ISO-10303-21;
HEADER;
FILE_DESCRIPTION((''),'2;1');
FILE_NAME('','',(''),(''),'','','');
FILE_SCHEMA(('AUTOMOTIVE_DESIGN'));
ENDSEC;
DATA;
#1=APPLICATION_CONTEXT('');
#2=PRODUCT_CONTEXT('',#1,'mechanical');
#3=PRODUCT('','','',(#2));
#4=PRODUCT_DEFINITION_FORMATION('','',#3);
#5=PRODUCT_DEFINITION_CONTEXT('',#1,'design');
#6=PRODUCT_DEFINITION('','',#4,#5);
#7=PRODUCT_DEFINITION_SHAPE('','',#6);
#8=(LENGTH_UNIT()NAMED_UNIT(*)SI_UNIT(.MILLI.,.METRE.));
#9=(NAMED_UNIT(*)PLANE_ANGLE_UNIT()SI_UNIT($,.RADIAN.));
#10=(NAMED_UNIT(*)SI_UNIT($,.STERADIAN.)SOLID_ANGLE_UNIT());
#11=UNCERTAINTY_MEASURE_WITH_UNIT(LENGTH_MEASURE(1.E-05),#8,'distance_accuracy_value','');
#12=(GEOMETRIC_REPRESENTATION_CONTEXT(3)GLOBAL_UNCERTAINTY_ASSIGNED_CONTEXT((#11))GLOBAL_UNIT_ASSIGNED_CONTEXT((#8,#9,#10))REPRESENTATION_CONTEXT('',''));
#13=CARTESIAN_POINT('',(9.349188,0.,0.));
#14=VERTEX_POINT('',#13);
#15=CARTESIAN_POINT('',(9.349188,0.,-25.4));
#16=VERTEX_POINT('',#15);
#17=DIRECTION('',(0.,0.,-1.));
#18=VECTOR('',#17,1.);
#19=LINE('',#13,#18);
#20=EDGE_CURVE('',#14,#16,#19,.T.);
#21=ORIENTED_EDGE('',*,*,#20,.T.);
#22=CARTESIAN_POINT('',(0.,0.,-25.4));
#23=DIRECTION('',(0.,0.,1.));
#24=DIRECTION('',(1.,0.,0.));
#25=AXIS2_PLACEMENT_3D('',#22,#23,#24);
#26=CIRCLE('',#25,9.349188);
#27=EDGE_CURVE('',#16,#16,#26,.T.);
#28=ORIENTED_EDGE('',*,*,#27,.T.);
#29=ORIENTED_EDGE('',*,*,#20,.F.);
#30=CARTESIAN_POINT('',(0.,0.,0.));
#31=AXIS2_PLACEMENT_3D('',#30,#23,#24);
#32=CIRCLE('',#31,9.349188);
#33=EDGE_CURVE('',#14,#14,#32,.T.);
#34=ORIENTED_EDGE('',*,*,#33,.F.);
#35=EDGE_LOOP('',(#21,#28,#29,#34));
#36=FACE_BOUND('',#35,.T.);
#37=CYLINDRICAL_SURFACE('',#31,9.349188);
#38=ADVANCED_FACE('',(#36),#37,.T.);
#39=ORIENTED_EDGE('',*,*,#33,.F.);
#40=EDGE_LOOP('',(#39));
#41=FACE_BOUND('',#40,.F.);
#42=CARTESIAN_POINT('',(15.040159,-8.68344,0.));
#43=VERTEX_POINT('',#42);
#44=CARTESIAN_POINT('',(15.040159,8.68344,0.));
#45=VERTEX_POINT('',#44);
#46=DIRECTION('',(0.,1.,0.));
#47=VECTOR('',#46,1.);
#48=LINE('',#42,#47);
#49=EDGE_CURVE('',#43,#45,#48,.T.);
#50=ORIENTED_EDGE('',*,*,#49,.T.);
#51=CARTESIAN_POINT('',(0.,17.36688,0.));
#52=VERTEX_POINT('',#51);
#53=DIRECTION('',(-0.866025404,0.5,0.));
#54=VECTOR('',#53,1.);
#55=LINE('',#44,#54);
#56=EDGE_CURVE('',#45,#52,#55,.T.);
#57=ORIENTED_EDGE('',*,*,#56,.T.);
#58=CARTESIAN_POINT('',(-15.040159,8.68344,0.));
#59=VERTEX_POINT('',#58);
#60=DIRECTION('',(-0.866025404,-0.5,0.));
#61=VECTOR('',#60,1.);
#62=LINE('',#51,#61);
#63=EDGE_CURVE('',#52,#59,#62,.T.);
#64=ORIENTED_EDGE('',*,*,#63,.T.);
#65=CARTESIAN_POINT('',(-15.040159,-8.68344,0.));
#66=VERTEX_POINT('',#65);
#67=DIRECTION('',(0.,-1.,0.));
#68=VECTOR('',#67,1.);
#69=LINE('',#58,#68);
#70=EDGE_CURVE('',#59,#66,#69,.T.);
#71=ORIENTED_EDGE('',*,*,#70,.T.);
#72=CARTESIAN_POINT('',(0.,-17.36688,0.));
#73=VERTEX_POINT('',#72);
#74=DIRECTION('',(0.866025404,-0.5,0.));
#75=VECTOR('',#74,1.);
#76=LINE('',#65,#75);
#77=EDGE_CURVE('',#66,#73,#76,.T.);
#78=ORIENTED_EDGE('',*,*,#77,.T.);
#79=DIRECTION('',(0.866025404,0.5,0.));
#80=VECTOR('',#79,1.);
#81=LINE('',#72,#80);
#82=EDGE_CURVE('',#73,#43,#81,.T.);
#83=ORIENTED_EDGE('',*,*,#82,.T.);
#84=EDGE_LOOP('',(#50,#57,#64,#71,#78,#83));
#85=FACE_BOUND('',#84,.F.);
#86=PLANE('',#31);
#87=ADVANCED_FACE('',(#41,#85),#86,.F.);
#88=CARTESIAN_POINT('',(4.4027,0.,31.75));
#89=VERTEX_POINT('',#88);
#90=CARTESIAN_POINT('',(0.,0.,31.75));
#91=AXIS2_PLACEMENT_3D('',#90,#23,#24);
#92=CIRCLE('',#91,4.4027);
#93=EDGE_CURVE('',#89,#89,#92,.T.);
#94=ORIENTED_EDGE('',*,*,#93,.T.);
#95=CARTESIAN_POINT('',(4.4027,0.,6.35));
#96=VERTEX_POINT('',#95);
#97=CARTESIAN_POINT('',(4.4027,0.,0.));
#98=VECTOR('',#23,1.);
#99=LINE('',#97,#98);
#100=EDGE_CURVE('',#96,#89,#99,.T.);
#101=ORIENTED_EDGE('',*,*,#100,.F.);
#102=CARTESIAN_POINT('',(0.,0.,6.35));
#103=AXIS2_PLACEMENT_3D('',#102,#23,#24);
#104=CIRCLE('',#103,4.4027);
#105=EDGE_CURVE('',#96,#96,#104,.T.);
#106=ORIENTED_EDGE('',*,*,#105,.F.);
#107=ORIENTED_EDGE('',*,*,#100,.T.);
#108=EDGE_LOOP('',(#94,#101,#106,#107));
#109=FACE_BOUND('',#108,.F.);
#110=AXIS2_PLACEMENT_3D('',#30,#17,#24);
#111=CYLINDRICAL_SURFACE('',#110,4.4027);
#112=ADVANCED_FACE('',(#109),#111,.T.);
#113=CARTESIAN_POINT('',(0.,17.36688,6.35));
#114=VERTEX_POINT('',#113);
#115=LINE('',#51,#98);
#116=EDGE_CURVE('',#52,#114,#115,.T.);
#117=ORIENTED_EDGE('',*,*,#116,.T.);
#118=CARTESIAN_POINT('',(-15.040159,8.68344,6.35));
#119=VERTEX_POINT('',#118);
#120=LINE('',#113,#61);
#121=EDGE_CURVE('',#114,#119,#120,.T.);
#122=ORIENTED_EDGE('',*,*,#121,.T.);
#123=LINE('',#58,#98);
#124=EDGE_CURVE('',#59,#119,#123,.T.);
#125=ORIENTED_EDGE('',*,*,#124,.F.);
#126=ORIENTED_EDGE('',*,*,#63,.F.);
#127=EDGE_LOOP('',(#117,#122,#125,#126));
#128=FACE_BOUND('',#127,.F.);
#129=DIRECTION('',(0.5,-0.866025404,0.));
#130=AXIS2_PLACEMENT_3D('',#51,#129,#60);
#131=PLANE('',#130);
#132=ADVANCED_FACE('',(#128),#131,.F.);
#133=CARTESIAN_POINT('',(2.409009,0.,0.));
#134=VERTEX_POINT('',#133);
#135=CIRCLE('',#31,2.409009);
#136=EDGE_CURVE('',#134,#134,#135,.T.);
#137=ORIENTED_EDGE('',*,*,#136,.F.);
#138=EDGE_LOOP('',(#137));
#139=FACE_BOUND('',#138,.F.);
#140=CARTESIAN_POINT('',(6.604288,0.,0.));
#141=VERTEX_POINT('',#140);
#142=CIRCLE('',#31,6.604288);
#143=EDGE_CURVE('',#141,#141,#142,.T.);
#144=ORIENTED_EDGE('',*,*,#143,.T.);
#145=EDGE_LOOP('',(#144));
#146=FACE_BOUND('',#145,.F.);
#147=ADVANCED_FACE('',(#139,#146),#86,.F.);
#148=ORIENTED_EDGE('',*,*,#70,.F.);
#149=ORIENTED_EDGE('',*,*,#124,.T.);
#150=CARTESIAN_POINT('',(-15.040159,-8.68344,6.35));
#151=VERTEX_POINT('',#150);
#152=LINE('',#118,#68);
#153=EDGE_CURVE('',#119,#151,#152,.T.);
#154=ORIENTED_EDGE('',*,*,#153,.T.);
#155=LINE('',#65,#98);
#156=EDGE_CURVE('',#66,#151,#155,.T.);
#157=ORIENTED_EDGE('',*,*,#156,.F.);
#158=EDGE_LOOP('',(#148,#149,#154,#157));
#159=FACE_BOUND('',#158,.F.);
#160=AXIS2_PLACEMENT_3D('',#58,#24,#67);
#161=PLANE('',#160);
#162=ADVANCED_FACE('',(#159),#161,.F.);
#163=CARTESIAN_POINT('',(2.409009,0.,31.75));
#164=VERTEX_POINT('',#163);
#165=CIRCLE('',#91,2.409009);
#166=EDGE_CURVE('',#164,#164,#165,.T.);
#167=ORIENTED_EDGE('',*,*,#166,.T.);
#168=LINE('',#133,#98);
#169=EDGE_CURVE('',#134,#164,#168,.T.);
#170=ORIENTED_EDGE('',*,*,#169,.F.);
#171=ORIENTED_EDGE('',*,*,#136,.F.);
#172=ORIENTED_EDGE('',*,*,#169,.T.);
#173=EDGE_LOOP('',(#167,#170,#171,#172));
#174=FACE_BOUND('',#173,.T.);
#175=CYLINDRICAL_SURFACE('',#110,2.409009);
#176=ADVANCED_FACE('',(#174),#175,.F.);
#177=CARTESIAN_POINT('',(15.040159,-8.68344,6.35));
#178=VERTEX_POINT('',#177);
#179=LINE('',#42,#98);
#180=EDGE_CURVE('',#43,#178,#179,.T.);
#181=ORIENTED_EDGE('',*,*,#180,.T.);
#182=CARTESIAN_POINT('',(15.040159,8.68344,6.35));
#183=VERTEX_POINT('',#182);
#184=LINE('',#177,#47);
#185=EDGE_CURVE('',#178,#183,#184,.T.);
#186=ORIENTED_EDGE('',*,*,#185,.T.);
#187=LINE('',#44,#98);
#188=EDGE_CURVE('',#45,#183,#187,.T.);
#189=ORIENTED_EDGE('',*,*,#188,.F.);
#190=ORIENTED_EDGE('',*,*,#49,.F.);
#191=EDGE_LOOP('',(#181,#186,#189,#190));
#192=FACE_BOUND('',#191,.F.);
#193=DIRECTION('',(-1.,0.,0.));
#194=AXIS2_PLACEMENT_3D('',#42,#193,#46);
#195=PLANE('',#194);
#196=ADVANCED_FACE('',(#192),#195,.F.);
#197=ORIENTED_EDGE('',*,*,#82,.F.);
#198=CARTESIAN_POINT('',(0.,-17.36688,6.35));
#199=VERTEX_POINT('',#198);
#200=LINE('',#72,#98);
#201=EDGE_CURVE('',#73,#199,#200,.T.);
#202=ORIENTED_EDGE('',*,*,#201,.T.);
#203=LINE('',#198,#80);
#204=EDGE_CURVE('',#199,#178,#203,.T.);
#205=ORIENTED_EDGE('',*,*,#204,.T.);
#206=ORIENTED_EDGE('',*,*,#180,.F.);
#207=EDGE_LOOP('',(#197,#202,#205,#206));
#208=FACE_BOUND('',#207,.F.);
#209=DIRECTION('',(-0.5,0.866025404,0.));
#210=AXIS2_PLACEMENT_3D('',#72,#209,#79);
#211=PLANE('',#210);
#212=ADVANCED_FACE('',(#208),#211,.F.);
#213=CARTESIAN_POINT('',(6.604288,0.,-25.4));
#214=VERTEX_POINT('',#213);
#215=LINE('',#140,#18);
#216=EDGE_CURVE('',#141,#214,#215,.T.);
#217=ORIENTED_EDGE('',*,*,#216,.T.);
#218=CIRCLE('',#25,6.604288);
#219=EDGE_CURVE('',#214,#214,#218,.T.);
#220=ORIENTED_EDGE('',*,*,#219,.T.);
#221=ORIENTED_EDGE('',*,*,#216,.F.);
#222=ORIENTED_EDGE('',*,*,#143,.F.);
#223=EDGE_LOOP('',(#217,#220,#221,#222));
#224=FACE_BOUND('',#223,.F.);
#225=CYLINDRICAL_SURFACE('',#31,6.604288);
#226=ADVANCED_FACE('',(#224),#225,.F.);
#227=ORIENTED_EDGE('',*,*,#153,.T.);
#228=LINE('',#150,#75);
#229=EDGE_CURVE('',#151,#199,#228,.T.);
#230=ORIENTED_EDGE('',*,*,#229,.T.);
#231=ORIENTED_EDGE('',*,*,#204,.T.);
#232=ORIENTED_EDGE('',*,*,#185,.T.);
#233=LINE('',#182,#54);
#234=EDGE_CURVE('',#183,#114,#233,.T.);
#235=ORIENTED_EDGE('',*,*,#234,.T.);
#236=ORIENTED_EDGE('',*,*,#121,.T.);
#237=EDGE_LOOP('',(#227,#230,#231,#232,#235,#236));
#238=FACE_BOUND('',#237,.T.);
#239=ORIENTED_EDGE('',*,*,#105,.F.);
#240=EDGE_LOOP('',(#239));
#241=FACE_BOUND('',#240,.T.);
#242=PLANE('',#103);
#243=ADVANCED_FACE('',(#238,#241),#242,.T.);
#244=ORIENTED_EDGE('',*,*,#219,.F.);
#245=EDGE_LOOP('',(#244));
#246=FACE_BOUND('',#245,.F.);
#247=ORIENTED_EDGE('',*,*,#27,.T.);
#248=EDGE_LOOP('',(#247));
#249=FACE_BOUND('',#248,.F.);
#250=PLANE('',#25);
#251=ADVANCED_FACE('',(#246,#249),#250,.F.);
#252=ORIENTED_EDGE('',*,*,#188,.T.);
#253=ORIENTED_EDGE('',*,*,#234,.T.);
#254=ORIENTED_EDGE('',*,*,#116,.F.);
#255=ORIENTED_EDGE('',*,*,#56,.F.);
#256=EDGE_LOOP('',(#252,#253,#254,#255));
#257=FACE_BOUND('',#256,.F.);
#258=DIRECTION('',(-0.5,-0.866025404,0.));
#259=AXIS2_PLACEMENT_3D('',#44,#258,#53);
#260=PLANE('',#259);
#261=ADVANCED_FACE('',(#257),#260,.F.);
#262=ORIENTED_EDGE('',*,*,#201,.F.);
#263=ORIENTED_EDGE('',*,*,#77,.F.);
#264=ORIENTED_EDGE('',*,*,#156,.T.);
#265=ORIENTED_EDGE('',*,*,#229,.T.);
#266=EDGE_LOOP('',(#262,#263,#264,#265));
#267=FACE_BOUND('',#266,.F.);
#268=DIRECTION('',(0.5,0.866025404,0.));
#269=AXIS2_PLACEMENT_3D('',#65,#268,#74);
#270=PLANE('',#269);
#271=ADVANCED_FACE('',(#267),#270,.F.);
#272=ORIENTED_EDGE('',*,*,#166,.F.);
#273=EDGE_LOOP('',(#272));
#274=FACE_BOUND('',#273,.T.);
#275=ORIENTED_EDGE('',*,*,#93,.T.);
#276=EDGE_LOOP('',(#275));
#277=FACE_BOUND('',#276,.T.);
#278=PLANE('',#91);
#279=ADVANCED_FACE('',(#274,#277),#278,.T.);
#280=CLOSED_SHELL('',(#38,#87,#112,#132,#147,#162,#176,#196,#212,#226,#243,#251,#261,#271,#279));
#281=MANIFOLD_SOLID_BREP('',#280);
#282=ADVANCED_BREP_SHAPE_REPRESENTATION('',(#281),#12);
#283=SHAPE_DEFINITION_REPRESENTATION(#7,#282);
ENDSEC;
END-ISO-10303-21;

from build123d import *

# Parameters (mm, degrees)
F0_R     = 9.349188324
F0_R_2   = 6.6042884463
F0_R_3   = 4.4026997979
F1_DEPTH = 6.35
F0_R_4   = 2.4090089184
F2_DEPTH = 31.75
F3_DEPTH = 25.4


# Not quite as in the source:
# - a length typed as a fraction of an inch, garbled in the dataset ("3 / 203.2 mm" for 3/8 in), is restored


with BuildPart() as f1:
    # F0 (on Top) → F1 (new body)
    with BuildSketch(Plane.XY):
        Polygon((15.0401592255, -8.6834399775), (15.0401592255, 8.6834399775), (0, 17.366879955), (-15.0401592255, 8.6834399775), (-15.0401592255, -8.6834399775), (0, -17.366879955), align=None)
        Circle(F0_R, mode=Mode.SUBTRACT)
        Circle(F0_R)
        Circle(F0_R_2, mode=Mode.SUBTRACT)
        Circle(F0_R_2)
        Circle(F0_R_3, mode=Mode.SUBTRACT)
    extrude(amount=F1_DEPTH)

    # F0 (on Top) → F2 (join)
    with BuildSketch(Plane.XY):
        Circle(F0_R_3)
        Circle(F0_R_4, mode=Mode.SUBTRACT)
    extrude(amount=F2_DEPTH)

    # F0 (on Top) → F3 (join)
    with BuildSketch(Plane.XY):
        Circle(F0_R)
        Circle(F0_R_2, mode=Mode.SUBTRACT)
    extrude(amount=-F3_DEPTH)


solid = f1.part
